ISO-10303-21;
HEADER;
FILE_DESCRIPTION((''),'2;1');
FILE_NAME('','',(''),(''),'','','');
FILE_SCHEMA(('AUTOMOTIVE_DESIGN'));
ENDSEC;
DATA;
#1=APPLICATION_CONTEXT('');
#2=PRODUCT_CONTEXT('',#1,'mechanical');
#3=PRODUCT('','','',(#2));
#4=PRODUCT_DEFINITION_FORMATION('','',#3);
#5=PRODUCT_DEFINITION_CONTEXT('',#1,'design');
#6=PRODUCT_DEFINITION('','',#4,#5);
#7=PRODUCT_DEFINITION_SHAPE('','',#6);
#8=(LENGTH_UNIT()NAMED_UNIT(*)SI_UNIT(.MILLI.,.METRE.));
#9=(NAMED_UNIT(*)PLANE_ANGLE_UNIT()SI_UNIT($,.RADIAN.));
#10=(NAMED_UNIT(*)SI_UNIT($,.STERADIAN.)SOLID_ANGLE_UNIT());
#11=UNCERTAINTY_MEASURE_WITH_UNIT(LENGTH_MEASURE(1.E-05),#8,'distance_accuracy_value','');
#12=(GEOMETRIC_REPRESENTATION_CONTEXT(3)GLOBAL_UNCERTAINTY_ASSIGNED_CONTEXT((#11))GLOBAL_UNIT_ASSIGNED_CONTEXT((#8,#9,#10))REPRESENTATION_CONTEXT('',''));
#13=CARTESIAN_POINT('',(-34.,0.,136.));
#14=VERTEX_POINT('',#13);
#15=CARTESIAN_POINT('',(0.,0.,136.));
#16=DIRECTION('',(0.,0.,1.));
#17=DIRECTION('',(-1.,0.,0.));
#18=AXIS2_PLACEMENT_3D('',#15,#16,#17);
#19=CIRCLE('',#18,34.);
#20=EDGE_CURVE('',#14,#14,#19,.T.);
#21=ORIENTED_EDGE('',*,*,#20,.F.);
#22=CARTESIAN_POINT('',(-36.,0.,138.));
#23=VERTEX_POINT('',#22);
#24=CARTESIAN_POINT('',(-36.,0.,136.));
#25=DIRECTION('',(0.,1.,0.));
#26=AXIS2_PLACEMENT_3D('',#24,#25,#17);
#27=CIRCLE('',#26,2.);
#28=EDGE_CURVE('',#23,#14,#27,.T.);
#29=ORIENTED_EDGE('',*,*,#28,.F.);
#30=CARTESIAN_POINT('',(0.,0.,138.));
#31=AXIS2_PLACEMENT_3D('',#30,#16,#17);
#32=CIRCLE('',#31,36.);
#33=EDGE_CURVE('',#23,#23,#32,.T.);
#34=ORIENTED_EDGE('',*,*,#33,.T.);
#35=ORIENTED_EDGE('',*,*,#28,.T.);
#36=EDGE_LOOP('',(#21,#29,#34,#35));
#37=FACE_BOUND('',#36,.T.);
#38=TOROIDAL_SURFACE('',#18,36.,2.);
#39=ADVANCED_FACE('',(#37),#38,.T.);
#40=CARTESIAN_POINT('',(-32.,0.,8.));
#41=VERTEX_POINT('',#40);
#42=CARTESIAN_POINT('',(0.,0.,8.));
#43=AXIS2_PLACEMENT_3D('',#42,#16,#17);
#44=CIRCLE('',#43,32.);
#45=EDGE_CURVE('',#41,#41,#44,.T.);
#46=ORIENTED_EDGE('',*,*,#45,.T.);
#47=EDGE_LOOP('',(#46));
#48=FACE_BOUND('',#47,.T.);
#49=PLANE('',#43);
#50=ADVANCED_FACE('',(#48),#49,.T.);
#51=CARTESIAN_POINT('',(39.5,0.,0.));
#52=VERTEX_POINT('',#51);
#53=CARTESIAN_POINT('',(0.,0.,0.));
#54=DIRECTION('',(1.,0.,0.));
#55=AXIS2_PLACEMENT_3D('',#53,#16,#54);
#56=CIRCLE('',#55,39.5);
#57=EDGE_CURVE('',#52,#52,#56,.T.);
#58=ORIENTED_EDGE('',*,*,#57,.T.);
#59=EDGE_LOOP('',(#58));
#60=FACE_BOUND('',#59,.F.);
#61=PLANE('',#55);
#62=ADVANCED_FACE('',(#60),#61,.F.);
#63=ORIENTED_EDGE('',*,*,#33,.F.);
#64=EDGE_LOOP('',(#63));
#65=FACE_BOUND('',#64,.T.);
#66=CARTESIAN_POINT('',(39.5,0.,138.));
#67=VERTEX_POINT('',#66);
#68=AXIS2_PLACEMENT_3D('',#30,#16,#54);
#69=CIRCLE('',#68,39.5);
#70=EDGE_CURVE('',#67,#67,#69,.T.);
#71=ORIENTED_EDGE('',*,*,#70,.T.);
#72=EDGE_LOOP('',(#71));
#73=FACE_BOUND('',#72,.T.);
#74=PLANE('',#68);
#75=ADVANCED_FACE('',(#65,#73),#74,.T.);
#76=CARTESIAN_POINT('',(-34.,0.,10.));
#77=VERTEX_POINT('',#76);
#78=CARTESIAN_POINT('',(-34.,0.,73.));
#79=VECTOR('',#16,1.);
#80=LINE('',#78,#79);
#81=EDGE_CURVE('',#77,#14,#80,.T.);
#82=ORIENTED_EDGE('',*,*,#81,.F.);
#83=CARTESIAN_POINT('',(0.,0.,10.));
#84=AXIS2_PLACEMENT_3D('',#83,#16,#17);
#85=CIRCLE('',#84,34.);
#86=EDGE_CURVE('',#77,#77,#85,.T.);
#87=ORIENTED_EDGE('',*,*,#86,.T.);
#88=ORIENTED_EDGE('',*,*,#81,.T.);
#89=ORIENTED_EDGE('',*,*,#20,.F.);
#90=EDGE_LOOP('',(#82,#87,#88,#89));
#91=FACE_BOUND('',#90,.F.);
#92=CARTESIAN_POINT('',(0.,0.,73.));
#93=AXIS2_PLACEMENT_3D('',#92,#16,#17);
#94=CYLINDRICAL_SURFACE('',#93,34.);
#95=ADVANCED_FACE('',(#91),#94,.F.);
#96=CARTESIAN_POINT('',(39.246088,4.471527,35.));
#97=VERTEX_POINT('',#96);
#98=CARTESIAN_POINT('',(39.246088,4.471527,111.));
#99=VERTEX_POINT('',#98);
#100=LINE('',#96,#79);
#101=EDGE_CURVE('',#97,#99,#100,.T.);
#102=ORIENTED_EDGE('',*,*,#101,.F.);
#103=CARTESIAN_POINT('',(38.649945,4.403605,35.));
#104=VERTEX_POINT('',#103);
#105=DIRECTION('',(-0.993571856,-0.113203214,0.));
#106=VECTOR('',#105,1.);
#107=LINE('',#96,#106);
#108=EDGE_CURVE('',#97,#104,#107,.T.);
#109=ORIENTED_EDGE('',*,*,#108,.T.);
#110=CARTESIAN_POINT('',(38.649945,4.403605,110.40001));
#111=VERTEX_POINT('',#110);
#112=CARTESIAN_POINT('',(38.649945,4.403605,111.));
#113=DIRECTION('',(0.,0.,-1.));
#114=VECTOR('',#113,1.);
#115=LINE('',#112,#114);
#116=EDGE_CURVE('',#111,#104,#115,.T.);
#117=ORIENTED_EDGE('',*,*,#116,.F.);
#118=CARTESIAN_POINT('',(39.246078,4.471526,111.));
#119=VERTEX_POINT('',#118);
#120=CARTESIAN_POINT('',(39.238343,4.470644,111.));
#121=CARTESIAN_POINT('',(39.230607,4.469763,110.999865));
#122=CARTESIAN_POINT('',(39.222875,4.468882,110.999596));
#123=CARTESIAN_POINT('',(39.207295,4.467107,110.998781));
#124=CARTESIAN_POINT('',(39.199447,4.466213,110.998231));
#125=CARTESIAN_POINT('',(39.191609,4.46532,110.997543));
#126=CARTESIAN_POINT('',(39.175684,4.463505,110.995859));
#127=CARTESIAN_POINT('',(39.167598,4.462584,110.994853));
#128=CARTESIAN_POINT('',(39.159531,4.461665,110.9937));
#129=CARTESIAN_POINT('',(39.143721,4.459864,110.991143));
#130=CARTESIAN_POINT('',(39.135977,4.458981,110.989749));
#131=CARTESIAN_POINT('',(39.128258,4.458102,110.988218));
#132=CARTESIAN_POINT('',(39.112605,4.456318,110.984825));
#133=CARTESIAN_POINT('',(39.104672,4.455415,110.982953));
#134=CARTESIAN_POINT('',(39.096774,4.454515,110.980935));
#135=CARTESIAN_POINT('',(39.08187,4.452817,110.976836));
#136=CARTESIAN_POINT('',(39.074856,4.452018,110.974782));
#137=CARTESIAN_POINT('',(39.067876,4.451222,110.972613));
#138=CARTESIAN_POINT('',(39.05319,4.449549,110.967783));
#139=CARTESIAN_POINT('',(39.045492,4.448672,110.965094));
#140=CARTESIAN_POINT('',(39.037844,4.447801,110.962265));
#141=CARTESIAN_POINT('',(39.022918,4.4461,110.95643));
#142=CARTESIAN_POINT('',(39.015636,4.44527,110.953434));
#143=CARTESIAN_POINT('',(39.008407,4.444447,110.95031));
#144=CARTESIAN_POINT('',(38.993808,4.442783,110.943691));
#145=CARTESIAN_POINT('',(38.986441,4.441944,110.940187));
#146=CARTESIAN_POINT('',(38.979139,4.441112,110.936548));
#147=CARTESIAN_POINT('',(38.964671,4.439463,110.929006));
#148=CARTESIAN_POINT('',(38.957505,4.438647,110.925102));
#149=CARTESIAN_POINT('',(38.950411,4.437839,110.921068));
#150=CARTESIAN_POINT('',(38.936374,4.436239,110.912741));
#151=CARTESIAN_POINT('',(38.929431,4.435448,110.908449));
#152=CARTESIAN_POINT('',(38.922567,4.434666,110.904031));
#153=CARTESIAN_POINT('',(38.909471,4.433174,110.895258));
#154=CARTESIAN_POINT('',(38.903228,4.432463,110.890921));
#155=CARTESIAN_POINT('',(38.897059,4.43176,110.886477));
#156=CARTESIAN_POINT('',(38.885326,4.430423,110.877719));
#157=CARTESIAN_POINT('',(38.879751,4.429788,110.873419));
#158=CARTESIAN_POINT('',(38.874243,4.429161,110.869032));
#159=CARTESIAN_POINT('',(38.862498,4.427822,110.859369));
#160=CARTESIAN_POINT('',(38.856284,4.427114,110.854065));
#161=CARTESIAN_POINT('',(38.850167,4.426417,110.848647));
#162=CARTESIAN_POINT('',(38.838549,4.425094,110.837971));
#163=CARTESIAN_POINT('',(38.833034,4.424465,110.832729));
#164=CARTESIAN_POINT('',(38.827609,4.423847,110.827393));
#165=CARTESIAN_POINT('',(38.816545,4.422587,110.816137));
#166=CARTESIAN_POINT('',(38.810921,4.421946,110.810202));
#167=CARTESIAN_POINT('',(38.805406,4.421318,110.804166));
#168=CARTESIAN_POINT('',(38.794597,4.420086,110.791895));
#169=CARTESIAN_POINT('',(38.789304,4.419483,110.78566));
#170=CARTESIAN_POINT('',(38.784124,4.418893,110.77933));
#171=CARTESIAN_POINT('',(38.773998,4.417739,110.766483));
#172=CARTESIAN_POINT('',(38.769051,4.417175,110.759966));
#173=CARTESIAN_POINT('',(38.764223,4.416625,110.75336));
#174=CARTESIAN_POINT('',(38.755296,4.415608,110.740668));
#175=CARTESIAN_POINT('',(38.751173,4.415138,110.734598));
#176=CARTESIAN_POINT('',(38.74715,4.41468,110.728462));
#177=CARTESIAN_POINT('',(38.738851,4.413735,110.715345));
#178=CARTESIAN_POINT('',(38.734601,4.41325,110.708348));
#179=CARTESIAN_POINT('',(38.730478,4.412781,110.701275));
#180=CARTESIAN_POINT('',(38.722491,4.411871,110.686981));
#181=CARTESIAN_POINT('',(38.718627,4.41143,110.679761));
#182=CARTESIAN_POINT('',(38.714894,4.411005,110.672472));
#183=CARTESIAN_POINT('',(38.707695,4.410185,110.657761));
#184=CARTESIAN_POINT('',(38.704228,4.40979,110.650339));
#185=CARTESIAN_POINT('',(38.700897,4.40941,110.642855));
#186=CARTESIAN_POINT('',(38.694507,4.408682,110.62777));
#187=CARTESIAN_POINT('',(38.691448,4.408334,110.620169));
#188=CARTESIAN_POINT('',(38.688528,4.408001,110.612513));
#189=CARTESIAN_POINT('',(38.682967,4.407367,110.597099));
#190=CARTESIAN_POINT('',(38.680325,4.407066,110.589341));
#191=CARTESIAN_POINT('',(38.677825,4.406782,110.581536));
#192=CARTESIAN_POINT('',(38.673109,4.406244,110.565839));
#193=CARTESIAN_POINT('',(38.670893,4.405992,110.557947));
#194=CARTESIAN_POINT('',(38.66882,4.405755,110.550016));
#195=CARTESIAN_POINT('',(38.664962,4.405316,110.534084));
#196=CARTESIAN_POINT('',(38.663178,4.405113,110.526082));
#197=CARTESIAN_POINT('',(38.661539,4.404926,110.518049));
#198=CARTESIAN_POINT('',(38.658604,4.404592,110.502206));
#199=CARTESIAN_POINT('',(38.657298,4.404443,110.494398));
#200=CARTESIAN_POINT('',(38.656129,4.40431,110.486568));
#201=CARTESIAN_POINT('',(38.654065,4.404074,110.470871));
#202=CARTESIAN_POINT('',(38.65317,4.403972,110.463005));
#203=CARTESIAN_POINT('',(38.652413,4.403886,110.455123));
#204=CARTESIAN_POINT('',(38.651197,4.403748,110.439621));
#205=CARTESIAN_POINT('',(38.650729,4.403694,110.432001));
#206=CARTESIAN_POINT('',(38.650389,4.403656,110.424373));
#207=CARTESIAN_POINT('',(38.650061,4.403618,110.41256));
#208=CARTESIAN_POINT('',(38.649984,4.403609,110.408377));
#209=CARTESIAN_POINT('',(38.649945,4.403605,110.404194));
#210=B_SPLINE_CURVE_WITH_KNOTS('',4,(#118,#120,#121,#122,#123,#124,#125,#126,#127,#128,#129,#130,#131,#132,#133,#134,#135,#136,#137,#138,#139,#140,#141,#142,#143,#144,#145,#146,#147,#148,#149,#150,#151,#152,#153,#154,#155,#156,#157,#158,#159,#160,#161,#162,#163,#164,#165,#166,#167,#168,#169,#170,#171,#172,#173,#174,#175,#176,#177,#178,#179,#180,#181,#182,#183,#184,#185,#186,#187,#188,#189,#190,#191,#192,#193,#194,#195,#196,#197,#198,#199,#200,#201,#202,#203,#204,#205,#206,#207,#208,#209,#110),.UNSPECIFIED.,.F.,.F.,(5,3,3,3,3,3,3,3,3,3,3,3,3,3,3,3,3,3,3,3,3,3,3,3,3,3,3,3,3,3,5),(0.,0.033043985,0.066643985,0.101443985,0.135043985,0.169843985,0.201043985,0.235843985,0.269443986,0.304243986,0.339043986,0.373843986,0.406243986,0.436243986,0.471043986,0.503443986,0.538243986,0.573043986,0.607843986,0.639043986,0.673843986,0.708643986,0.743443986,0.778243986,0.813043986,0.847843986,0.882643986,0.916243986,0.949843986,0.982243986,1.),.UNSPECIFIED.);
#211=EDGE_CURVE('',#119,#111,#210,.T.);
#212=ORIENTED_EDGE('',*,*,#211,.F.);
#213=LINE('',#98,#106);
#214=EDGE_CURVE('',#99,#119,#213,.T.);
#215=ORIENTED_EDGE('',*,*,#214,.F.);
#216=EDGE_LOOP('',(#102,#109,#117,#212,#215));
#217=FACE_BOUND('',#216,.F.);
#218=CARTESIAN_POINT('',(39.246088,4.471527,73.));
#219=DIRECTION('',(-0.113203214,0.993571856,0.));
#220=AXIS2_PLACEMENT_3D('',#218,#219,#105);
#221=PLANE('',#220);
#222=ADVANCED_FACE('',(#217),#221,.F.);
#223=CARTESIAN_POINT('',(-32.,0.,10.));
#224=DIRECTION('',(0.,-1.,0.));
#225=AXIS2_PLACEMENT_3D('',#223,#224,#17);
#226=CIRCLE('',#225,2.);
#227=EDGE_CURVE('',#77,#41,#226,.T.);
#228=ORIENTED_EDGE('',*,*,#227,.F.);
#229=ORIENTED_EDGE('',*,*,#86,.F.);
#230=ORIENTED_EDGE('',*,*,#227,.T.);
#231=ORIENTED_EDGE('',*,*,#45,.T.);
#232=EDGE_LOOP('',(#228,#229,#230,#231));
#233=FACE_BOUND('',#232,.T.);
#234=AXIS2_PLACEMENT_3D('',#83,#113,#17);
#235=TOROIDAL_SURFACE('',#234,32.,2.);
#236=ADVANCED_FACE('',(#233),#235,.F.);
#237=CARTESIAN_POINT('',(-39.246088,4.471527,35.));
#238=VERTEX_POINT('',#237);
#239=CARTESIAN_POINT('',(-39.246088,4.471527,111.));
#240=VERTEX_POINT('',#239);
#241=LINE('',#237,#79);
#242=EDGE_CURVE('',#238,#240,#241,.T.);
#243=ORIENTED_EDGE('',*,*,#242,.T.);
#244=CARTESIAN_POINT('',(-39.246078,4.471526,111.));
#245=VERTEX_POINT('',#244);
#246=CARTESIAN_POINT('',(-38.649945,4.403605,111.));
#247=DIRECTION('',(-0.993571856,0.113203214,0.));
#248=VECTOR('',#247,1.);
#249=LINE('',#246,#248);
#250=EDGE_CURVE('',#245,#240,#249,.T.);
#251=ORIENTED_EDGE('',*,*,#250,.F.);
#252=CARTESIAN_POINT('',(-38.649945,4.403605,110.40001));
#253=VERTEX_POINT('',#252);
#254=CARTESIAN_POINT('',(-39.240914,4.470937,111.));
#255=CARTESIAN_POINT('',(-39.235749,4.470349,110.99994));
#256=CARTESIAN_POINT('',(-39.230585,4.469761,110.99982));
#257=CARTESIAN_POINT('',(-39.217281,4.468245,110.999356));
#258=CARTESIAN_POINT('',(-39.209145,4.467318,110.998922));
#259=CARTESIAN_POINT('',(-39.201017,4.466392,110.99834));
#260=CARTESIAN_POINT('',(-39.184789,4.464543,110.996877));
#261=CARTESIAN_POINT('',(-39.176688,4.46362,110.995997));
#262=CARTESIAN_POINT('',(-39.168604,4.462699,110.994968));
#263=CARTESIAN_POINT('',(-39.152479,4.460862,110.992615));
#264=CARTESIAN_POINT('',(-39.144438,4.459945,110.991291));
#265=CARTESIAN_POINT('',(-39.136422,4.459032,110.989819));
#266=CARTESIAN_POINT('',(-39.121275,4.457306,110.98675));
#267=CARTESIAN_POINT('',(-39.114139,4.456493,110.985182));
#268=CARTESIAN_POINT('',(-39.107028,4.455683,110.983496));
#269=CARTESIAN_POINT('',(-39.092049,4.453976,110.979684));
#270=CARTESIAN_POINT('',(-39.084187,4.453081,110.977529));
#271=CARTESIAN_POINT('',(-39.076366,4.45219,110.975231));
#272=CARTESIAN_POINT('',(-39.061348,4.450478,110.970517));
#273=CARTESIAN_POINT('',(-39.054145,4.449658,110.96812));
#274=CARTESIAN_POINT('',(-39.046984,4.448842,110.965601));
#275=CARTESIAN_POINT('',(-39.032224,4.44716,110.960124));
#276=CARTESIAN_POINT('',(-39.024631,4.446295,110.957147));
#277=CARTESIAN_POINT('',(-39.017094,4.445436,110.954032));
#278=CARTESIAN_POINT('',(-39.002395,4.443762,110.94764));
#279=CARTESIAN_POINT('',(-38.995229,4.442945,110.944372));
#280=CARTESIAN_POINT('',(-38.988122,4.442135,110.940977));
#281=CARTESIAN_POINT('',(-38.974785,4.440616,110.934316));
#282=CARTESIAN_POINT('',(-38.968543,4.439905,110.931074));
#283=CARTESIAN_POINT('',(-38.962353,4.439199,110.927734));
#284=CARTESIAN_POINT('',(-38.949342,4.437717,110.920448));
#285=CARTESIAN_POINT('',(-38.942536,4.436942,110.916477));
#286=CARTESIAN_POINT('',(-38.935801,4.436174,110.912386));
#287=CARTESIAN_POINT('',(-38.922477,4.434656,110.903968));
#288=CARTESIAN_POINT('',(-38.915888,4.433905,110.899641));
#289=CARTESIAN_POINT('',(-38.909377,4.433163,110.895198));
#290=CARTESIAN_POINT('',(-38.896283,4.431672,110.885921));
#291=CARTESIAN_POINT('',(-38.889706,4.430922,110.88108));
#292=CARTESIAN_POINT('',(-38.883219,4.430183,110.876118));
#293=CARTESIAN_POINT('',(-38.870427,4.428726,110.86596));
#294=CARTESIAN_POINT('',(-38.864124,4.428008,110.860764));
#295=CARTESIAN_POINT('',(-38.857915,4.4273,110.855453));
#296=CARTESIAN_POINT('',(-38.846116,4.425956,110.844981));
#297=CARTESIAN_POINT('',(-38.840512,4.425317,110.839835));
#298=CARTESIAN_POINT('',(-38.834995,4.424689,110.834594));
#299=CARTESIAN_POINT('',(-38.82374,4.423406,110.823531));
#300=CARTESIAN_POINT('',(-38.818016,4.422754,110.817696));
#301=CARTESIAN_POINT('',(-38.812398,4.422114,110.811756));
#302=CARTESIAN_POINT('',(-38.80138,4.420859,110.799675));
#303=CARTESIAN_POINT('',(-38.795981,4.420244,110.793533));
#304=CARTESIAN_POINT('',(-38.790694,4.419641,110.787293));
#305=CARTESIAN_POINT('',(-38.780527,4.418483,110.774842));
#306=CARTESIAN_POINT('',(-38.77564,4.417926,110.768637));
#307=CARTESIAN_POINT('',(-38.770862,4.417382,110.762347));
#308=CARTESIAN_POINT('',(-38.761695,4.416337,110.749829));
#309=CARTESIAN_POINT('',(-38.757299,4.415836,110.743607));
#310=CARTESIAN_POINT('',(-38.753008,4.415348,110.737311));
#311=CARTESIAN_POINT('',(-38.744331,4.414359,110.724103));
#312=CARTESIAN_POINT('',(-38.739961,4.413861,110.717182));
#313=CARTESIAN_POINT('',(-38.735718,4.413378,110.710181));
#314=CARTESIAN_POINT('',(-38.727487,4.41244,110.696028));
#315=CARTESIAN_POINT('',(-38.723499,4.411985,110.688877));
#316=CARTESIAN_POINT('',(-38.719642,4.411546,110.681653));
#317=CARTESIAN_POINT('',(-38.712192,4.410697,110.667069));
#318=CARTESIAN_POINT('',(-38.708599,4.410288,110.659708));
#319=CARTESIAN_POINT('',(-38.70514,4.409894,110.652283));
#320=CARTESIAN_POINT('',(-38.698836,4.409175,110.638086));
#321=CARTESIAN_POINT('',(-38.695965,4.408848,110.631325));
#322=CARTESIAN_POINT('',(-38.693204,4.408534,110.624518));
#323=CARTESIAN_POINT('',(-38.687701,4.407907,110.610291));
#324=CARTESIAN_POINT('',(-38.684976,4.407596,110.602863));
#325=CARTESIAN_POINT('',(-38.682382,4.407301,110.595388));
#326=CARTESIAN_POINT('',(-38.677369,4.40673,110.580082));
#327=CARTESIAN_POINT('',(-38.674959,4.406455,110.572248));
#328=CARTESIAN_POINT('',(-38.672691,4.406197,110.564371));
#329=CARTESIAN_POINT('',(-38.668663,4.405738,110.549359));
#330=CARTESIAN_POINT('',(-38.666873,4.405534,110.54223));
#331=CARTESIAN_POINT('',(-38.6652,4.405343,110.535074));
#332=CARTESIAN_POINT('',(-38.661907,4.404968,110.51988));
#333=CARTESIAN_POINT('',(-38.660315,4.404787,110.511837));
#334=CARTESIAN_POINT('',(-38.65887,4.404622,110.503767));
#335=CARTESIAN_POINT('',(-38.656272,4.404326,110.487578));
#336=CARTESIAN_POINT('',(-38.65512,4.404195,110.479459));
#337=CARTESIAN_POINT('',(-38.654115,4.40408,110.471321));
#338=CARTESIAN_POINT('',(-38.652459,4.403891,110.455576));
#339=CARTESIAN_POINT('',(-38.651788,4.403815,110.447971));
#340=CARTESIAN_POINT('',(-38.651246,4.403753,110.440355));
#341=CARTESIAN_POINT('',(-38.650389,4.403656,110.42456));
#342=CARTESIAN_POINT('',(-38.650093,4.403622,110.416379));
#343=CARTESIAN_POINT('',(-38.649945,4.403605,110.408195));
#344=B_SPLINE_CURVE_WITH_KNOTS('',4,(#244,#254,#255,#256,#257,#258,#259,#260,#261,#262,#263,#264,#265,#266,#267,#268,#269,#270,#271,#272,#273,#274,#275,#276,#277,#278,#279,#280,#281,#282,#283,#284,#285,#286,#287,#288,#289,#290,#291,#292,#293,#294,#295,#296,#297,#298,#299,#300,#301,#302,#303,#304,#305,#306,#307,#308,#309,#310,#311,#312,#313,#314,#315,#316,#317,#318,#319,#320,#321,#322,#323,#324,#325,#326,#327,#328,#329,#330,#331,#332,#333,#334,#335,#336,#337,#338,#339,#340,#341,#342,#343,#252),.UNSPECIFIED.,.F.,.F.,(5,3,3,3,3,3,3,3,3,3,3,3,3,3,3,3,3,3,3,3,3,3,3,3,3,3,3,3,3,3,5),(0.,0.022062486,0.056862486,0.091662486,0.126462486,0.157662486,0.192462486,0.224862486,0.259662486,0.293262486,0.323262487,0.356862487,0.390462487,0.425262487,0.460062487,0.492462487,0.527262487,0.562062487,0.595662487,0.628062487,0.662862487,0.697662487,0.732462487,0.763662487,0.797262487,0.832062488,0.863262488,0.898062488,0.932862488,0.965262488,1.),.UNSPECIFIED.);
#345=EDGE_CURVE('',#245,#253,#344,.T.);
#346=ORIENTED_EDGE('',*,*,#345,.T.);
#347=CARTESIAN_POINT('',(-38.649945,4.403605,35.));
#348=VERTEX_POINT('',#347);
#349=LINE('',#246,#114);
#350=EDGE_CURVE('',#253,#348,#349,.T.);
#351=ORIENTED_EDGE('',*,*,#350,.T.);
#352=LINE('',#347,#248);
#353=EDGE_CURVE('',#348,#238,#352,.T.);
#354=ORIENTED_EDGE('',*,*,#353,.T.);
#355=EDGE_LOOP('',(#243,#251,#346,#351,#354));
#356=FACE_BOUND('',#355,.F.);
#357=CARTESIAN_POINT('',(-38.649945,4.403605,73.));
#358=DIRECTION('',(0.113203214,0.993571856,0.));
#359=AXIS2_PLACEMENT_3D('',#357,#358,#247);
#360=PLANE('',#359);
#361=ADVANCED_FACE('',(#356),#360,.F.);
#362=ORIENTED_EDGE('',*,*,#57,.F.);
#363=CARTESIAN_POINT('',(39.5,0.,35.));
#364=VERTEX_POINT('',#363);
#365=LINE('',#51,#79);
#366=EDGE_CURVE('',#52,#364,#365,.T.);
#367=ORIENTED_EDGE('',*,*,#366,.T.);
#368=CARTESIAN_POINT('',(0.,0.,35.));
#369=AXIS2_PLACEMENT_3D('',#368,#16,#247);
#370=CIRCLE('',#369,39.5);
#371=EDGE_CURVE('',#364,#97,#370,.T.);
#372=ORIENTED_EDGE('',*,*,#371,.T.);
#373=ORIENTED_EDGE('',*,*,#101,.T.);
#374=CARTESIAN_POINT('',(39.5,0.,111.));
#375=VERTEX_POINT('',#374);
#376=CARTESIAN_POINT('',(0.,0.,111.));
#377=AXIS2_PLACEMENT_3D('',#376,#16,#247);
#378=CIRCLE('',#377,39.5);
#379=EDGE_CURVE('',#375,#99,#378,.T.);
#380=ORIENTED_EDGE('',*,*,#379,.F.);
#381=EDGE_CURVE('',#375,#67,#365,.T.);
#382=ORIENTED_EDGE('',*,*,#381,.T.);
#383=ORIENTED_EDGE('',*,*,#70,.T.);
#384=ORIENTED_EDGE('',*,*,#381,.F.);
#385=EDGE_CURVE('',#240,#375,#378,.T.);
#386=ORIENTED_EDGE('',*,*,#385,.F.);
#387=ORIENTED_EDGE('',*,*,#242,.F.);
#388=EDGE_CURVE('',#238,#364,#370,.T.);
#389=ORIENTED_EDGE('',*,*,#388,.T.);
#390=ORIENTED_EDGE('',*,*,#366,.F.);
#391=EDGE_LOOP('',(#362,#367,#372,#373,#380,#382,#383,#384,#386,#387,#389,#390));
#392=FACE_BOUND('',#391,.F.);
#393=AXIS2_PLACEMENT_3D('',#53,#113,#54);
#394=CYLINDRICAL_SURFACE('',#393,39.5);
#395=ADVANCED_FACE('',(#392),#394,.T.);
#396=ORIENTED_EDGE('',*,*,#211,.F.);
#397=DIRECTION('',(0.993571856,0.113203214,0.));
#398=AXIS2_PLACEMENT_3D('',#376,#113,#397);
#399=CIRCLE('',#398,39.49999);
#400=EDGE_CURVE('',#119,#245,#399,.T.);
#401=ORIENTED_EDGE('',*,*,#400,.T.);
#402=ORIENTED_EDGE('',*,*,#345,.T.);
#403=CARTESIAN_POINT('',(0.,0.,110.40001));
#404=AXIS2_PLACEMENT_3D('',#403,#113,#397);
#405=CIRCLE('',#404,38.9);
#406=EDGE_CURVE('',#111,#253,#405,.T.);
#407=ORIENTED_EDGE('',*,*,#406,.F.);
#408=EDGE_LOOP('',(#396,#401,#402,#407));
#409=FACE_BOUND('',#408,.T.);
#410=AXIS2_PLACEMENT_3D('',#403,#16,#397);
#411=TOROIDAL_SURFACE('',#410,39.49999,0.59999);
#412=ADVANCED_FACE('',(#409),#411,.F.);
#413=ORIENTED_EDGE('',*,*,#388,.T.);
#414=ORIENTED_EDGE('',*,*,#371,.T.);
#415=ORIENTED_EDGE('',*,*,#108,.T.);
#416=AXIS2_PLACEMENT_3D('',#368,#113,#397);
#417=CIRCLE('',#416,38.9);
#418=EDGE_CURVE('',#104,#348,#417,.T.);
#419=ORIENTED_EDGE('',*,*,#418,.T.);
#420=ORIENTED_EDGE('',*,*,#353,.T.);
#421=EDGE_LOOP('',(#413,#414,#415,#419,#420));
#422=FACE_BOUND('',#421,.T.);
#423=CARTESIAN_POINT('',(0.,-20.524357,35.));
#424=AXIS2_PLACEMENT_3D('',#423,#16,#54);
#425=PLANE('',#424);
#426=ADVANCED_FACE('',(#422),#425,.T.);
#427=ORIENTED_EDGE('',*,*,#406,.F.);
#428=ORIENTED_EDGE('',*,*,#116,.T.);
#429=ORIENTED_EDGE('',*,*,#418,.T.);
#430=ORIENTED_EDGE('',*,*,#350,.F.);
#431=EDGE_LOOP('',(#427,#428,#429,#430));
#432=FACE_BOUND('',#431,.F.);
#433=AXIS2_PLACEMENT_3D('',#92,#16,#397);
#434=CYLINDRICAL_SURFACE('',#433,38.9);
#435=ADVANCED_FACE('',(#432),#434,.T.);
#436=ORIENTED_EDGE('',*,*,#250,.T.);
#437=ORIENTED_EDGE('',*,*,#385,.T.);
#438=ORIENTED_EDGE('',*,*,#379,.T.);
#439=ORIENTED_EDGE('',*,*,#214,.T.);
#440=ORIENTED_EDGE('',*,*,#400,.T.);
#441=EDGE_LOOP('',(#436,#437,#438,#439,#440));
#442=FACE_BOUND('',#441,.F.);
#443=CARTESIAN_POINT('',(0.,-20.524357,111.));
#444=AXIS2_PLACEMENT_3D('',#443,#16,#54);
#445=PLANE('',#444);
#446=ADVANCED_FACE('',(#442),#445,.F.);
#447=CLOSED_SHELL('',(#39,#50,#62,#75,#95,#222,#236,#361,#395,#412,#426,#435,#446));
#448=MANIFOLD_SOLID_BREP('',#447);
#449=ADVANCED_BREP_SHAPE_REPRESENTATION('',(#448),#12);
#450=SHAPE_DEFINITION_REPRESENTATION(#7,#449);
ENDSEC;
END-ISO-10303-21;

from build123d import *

# Parameters (mm, degrees)
F0_R     = 39.5
F1_DEPTH = 138
F2_W     = 34
F2_H     = 130
F6_DEPTH = 38
F7_R     = 0.59999
F8_R     = 2


# Not quite as in the source:
# - a fillet or chamfer is up to 0.001 mm smaller than in the source, because OpenCascade refuses the exact size


with BuildPart() as f1:
    # F0 (on Top) → F1 (new body)
    with BuildSketch(Plane.XY):
        Circle(F0_R)
    extrude(amount=F1_DEPTH)

    # F2 (on Front) → F3 (revolve, cut)
    with BuildSketch(Plane.XZ):
        with Locations((-17, 73)):
            Rectangle(F2_W, F2_H)
    revolve(axis=Axis((0, 0, 73), (0, 0, 1)), mode=Mode.SUBTRACT)

    # F5 (on plane+point) → F6 (cut, symmetric)
    with BuildSketch(Plane.XY.offset(73)):
        with BuildLine():
            Line((-38.6499451858, 4.4036050156), (-39.2460882992, 4.4715269438))
            ThreePointArc((-39.2460882992, 4.4715269438), (0, -39.5), (39.2460882992, 4.4715269438))
            Line((39.2460882992, 4.4715269438), (38.6499451858, 4.4036050156))
            ThreePointArc((38.6499451858, 4.4036050156), (0, -38.9), (-38.6499451858, 4.4036050156))
        make_face()
    extrude(amount=F6_DEPTH, both=True, mode=Mode.SUBTRACT)

    # F7 (radius 0.6 in the source; OpenCascade refuses exactly that, so slightly less here)
    f7_edges = [f1.edges().sort_by_distance(p)[0] for p in [
        (0, -38.9, 111),
    ]]
    fillet(f7_edges, radius=F7_R)

    # F8
    f8_edges = [f1.edges().sort_by_distance(p)[0] for p in [
        (34, 0, 8),
        (34, 0, 138),
    ]]
    fillet(f8_edges, radius=F8_R)


solid = f1.part
